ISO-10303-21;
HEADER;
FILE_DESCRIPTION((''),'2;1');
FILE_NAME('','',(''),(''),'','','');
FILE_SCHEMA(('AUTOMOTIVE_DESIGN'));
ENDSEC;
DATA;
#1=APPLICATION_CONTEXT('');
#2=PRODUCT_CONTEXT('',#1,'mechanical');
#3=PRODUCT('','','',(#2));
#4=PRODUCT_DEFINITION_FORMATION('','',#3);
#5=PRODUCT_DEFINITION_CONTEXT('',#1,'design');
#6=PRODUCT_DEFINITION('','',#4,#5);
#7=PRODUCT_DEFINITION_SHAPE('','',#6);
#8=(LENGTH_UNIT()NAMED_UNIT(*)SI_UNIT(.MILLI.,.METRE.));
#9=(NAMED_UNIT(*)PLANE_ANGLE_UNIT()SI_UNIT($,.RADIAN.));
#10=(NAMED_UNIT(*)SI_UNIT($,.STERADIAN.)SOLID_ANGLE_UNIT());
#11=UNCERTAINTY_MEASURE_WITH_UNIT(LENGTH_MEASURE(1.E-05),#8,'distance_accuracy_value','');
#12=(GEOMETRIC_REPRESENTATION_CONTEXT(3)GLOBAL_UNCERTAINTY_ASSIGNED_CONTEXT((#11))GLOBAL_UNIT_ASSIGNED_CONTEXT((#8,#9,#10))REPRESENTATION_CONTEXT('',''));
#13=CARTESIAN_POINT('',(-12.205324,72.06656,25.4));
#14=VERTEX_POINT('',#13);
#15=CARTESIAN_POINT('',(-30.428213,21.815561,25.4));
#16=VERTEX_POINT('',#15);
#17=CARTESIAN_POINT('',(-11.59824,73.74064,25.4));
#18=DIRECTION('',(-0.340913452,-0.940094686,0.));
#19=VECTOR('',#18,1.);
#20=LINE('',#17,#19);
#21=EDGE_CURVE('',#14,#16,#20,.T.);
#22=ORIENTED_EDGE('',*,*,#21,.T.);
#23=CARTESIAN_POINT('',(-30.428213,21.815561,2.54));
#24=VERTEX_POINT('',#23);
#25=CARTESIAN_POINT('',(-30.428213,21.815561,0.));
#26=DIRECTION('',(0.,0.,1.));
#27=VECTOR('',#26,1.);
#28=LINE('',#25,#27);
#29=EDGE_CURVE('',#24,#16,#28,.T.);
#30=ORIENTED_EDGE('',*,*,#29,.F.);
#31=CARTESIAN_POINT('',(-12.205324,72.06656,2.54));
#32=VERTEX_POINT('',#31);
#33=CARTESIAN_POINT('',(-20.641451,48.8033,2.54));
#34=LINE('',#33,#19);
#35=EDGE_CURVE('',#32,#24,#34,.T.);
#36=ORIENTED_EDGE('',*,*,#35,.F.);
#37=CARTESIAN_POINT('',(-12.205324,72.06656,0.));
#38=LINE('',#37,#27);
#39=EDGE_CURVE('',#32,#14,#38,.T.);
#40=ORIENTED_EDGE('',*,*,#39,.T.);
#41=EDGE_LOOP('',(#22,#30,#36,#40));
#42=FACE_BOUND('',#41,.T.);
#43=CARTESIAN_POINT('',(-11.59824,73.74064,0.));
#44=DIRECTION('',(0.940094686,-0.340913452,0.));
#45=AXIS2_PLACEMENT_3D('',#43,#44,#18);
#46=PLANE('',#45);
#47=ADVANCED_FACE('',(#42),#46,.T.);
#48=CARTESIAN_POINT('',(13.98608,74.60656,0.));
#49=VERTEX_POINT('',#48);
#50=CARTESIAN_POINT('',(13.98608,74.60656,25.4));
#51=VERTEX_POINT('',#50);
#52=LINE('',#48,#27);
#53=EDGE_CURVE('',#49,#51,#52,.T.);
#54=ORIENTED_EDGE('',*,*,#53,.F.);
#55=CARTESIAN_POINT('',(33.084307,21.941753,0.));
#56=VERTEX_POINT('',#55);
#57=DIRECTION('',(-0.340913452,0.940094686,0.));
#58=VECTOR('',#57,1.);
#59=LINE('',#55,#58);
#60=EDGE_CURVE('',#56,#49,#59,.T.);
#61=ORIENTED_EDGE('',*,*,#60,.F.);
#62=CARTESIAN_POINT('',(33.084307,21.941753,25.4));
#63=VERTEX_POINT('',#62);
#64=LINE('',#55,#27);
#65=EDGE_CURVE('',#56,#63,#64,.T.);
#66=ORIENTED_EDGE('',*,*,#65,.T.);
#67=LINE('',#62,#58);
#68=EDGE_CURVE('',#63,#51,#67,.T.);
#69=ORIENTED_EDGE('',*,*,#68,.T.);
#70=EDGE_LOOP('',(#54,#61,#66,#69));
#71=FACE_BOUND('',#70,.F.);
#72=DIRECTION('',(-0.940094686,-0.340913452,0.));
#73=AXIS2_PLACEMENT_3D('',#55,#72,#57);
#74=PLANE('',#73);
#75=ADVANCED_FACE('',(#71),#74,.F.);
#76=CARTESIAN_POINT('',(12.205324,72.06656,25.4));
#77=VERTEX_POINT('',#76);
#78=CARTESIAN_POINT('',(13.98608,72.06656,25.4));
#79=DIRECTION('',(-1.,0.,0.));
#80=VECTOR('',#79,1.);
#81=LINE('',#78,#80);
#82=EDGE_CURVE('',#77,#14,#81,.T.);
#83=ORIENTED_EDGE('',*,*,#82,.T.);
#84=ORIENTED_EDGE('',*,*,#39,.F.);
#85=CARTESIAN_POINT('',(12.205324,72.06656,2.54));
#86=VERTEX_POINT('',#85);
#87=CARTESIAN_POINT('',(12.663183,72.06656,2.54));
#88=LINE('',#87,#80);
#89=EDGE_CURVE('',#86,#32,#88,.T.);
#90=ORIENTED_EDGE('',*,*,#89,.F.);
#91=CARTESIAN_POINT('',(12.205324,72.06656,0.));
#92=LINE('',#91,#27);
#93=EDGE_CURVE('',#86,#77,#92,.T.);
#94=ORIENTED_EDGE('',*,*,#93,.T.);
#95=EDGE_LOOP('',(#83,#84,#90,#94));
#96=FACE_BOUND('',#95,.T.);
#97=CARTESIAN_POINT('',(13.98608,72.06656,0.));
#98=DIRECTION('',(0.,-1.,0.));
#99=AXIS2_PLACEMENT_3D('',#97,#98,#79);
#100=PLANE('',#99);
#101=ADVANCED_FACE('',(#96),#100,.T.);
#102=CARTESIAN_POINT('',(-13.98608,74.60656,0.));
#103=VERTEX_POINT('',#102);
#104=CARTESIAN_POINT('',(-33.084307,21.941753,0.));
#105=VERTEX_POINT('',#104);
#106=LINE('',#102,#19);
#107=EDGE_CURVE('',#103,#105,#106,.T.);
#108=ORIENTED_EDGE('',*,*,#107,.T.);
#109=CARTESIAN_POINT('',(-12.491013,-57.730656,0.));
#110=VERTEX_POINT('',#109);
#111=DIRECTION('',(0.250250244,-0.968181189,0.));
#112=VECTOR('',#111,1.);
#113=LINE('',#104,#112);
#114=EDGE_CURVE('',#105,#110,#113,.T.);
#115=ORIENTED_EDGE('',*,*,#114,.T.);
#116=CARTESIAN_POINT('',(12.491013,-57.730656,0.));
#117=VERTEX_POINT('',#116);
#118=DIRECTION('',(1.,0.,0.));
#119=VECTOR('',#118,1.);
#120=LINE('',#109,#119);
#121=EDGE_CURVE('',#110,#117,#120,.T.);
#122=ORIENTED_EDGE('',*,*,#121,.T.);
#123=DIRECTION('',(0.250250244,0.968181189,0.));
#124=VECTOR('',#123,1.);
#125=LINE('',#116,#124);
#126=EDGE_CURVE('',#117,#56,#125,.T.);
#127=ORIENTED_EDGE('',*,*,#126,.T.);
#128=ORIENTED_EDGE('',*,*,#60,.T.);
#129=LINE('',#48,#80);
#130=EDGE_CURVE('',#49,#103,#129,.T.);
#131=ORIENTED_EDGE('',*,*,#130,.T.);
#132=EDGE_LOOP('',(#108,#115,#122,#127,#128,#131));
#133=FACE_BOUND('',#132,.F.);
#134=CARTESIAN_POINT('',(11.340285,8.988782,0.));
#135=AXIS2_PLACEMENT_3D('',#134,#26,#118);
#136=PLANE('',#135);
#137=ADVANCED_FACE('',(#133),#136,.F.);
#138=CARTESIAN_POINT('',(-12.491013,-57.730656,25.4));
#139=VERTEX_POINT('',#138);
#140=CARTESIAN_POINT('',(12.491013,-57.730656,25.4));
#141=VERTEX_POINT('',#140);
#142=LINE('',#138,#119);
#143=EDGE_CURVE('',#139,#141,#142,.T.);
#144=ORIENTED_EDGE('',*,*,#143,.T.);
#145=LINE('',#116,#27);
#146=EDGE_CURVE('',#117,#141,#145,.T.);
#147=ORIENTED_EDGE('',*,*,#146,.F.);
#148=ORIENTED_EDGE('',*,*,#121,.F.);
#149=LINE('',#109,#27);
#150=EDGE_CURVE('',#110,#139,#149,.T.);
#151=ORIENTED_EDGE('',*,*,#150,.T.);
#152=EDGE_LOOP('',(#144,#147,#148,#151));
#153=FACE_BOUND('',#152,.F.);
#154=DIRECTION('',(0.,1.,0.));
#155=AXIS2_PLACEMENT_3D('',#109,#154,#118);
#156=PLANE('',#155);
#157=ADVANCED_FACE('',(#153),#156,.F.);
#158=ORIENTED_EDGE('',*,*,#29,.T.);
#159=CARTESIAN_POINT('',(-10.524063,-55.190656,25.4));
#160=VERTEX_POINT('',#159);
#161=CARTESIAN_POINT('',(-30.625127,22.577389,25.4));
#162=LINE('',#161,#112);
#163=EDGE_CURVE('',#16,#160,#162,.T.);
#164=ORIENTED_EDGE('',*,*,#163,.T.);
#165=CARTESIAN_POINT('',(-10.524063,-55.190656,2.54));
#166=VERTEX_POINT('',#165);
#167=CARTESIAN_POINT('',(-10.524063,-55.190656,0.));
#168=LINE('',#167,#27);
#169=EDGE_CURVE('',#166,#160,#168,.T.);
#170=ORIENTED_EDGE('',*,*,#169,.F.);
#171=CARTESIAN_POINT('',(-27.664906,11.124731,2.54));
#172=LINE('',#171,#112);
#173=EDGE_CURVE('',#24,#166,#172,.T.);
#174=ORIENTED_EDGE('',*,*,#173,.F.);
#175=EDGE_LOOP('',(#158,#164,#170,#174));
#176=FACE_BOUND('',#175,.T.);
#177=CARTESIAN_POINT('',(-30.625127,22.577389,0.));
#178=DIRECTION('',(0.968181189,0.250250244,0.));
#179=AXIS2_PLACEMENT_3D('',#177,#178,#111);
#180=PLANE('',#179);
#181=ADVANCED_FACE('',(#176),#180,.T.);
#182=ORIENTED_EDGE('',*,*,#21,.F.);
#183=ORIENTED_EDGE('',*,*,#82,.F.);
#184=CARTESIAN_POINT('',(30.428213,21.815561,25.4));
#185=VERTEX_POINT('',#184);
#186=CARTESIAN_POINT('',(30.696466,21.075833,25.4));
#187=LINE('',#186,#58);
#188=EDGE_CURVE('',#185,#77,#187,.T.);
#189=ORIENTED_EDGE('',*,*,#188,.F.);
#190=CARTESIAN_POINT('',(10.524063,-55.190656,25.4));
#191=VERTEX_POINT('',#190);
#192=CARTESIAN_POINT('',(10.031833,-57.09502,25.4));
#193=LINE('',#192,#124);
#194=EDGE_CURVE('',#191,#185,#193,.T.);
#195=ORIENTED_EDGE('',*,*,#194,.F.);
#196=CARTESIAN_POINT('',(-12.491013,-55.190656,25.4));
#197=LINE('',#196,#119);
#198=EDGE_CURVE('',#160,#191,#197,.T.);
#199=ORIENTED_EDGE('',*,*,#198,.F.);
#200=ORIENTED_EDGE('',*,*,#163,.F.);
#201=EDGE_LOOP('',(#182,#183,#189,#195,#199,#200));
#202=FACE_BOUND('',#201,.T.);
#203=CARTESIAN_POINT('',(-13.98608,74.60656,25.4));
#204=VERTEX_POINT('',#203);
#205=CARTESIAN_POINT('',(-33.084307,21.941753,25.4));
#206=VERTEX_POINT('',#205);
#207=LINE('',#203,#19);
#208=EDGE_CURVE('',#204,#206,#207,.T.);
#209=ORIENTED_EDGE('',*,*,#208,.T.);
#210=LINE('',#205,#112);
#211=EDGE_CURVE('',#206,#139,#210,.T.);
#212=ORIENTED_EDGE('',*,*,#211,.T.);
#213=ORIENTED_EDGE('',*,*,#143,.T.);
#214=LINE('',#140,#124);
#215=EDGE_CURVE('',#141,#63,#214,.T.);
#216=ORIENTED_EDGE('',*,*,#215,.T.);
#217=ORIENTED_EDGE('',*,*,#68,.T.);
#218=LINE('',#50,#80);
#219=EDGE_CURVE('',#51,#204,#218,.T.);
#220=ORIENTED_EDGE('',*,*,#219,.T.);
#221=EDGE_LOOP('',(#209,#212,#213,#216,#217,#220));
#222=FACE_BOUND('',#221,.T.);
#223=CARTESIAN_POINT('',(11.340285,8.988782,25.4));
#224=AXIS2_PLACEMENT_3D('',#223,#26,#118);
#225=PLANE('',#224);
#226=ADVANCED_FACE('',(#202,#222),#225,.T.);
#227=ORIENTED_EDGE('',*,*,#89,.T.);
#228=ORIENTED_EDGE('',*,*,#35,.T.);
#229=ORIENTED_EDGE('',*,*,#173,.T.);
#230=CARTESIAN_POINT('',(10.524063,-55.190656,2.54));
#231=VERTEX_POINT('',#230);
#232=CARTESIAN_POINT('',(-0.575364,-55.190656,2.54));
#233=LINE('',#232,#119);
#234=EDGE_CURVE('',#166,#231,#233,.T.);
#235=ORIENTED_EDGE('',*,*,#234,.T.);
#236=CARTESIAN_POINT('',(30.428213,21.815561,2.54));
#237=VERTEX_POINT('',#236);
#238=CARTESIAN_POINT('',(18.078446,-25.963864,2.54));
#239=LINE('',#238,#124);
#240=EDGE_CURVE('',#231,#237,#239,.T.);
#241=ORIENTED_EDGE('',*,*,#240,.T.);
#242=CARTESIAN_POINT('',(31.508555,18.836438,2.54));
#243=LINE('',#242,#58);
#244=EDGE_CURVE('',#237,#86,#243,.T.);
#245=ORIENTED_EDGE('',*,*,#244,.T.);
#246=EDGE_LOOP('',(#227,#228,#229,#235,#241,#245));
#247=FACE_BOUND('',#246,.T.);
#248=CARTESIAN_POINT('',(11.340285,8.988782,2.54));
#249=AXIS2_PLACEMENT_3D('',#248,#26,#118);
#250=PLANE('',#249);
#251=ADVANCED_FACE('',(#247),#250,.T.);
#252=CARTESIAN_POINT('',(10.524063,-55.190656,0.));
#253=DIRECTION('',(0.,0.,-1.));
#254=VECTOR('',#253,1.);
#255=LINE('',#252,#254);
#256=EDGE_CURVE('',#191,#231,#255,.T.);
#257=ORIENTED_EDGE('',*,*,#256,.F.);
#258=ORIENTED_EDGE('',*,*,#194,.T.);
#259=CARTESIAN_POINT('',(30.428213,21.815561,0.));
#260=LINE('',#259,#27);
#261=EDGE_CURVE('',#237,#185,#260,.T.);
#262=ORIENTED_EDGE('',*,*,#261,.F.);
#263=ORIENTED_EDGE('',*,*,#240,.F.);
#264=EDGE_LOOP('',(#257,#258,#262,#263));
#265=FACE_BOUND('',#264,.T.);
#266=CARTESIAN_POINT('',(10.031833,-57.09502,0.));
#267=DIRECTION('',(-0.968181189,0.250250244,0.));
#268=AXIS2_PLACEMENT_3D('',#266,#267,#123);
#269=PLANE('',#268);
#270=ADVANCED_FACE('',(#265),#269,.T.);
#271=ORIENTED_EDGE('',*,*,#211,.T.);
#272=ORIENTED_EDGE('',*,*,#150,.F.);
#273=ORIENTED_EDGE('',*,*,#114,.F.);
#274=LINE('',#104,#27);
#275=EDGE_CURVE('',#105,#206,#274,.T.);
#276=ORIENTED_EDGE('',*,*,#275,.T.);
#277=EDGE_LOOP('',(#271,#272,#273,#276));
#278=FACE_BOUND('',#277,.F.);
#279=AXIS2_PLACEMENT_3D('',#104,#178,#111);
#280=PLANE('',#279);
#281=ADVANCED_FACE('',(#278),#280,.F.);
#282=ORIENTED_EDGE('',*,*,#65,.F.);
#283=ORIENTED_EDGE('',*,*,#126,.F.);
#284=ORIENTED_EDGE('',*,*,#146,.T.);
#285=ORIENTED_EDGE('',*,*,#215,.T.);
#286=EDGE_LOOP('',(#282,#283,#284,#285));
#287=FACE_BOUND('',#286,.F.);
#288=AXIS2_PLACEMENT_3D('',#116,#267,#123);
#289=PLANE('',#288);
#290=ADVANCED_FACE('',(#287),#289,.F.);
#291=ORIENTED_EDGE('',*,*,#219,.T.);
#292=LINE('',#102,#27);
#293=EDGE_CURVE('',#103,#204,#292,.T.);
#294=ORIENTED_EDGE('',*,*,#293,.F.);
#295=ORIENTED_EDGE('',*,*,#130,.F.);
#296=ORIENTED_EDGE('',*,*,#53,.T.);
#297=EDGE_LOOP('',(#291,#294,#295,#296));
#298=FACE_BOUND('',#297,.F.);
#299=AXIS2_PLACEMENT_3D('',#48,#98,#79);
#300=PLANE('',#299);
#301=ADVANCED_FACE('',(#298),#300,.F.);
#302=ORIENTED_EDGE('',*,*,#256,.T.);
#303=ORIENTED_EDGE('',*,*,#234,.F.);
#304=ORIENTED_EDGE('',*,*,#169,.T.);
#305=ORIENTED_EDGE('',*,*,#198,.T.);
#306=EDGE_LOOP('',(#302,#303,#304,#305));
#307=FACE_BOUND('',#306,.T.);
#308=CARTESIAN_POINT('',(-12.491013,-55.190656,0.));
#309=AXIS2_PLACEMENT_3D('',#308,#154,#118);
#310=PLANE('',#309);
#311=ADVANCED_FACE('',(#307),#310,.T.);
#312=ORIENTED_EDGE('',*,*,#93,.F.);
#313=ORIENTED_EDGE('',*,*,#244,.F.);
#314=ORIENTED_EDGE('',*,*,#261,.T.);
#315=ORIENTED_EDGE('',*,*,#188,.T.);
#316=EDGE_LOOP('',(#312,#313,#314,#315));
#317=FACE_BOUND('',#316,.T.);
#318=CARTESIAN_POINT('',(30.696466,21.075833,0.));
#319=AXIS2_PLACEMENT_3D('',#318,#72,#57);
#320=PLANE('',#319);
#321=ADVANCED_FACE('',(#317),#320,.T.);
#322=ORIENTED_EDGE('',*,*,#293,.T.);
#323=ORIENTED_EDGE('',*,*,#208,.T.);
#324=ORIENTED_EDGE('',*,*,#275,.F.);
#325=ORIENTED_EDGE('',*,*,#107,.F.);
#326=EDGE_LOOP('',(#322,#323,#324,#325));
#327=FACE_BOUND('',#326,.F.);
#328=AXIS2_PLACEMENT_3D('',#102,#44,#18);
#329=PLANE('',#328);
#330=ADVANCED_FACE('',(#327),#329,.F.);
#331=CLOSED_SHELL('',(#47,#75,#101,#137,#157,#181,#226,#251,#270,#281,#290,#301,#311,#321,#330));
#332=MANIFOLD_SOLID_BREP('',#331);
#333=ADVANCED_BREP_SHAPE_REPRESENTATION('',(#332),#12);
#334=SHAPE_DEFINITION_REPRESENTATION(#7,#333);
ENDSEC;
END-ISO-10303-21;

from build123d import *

# Parameters (mm, degrees)
F1_DEPTH = 25.4
F2_T     = -2.54


# Not quite as in the source:
# - a feature of the source that left no trace in its solid (it failed there, or was rolled back) is left out


with BuildPart() as f1:
    # F0 (on Top) → F1 (new body)
    with BuildSketch(Plane.XY):
        Polygon((0, 74.6065601707), (0, -57.7306561172), (12.4910129234, -57.7306561172), (33.0843068659, 21.9417531043), (13.9860804434, 74.6065601707), align=None)
        Polygon((-12.4910129234, -57.7306561172), (0, -57.7306561172), (0, 74.6065601707), (-13.9860804434, 74.6065601707), (-33.0843068659, 21.9417531043), align=None)
    extrude(amount=F1_DEPTH)

    # F2
    f2_openings = [f1.faces().sort_by_distance(p)[0] for p in [
        (0, 11.07211, 25.4),
    ]]
    offset(amount=F2_T, openings=f2_openings)


solid = f1.part
